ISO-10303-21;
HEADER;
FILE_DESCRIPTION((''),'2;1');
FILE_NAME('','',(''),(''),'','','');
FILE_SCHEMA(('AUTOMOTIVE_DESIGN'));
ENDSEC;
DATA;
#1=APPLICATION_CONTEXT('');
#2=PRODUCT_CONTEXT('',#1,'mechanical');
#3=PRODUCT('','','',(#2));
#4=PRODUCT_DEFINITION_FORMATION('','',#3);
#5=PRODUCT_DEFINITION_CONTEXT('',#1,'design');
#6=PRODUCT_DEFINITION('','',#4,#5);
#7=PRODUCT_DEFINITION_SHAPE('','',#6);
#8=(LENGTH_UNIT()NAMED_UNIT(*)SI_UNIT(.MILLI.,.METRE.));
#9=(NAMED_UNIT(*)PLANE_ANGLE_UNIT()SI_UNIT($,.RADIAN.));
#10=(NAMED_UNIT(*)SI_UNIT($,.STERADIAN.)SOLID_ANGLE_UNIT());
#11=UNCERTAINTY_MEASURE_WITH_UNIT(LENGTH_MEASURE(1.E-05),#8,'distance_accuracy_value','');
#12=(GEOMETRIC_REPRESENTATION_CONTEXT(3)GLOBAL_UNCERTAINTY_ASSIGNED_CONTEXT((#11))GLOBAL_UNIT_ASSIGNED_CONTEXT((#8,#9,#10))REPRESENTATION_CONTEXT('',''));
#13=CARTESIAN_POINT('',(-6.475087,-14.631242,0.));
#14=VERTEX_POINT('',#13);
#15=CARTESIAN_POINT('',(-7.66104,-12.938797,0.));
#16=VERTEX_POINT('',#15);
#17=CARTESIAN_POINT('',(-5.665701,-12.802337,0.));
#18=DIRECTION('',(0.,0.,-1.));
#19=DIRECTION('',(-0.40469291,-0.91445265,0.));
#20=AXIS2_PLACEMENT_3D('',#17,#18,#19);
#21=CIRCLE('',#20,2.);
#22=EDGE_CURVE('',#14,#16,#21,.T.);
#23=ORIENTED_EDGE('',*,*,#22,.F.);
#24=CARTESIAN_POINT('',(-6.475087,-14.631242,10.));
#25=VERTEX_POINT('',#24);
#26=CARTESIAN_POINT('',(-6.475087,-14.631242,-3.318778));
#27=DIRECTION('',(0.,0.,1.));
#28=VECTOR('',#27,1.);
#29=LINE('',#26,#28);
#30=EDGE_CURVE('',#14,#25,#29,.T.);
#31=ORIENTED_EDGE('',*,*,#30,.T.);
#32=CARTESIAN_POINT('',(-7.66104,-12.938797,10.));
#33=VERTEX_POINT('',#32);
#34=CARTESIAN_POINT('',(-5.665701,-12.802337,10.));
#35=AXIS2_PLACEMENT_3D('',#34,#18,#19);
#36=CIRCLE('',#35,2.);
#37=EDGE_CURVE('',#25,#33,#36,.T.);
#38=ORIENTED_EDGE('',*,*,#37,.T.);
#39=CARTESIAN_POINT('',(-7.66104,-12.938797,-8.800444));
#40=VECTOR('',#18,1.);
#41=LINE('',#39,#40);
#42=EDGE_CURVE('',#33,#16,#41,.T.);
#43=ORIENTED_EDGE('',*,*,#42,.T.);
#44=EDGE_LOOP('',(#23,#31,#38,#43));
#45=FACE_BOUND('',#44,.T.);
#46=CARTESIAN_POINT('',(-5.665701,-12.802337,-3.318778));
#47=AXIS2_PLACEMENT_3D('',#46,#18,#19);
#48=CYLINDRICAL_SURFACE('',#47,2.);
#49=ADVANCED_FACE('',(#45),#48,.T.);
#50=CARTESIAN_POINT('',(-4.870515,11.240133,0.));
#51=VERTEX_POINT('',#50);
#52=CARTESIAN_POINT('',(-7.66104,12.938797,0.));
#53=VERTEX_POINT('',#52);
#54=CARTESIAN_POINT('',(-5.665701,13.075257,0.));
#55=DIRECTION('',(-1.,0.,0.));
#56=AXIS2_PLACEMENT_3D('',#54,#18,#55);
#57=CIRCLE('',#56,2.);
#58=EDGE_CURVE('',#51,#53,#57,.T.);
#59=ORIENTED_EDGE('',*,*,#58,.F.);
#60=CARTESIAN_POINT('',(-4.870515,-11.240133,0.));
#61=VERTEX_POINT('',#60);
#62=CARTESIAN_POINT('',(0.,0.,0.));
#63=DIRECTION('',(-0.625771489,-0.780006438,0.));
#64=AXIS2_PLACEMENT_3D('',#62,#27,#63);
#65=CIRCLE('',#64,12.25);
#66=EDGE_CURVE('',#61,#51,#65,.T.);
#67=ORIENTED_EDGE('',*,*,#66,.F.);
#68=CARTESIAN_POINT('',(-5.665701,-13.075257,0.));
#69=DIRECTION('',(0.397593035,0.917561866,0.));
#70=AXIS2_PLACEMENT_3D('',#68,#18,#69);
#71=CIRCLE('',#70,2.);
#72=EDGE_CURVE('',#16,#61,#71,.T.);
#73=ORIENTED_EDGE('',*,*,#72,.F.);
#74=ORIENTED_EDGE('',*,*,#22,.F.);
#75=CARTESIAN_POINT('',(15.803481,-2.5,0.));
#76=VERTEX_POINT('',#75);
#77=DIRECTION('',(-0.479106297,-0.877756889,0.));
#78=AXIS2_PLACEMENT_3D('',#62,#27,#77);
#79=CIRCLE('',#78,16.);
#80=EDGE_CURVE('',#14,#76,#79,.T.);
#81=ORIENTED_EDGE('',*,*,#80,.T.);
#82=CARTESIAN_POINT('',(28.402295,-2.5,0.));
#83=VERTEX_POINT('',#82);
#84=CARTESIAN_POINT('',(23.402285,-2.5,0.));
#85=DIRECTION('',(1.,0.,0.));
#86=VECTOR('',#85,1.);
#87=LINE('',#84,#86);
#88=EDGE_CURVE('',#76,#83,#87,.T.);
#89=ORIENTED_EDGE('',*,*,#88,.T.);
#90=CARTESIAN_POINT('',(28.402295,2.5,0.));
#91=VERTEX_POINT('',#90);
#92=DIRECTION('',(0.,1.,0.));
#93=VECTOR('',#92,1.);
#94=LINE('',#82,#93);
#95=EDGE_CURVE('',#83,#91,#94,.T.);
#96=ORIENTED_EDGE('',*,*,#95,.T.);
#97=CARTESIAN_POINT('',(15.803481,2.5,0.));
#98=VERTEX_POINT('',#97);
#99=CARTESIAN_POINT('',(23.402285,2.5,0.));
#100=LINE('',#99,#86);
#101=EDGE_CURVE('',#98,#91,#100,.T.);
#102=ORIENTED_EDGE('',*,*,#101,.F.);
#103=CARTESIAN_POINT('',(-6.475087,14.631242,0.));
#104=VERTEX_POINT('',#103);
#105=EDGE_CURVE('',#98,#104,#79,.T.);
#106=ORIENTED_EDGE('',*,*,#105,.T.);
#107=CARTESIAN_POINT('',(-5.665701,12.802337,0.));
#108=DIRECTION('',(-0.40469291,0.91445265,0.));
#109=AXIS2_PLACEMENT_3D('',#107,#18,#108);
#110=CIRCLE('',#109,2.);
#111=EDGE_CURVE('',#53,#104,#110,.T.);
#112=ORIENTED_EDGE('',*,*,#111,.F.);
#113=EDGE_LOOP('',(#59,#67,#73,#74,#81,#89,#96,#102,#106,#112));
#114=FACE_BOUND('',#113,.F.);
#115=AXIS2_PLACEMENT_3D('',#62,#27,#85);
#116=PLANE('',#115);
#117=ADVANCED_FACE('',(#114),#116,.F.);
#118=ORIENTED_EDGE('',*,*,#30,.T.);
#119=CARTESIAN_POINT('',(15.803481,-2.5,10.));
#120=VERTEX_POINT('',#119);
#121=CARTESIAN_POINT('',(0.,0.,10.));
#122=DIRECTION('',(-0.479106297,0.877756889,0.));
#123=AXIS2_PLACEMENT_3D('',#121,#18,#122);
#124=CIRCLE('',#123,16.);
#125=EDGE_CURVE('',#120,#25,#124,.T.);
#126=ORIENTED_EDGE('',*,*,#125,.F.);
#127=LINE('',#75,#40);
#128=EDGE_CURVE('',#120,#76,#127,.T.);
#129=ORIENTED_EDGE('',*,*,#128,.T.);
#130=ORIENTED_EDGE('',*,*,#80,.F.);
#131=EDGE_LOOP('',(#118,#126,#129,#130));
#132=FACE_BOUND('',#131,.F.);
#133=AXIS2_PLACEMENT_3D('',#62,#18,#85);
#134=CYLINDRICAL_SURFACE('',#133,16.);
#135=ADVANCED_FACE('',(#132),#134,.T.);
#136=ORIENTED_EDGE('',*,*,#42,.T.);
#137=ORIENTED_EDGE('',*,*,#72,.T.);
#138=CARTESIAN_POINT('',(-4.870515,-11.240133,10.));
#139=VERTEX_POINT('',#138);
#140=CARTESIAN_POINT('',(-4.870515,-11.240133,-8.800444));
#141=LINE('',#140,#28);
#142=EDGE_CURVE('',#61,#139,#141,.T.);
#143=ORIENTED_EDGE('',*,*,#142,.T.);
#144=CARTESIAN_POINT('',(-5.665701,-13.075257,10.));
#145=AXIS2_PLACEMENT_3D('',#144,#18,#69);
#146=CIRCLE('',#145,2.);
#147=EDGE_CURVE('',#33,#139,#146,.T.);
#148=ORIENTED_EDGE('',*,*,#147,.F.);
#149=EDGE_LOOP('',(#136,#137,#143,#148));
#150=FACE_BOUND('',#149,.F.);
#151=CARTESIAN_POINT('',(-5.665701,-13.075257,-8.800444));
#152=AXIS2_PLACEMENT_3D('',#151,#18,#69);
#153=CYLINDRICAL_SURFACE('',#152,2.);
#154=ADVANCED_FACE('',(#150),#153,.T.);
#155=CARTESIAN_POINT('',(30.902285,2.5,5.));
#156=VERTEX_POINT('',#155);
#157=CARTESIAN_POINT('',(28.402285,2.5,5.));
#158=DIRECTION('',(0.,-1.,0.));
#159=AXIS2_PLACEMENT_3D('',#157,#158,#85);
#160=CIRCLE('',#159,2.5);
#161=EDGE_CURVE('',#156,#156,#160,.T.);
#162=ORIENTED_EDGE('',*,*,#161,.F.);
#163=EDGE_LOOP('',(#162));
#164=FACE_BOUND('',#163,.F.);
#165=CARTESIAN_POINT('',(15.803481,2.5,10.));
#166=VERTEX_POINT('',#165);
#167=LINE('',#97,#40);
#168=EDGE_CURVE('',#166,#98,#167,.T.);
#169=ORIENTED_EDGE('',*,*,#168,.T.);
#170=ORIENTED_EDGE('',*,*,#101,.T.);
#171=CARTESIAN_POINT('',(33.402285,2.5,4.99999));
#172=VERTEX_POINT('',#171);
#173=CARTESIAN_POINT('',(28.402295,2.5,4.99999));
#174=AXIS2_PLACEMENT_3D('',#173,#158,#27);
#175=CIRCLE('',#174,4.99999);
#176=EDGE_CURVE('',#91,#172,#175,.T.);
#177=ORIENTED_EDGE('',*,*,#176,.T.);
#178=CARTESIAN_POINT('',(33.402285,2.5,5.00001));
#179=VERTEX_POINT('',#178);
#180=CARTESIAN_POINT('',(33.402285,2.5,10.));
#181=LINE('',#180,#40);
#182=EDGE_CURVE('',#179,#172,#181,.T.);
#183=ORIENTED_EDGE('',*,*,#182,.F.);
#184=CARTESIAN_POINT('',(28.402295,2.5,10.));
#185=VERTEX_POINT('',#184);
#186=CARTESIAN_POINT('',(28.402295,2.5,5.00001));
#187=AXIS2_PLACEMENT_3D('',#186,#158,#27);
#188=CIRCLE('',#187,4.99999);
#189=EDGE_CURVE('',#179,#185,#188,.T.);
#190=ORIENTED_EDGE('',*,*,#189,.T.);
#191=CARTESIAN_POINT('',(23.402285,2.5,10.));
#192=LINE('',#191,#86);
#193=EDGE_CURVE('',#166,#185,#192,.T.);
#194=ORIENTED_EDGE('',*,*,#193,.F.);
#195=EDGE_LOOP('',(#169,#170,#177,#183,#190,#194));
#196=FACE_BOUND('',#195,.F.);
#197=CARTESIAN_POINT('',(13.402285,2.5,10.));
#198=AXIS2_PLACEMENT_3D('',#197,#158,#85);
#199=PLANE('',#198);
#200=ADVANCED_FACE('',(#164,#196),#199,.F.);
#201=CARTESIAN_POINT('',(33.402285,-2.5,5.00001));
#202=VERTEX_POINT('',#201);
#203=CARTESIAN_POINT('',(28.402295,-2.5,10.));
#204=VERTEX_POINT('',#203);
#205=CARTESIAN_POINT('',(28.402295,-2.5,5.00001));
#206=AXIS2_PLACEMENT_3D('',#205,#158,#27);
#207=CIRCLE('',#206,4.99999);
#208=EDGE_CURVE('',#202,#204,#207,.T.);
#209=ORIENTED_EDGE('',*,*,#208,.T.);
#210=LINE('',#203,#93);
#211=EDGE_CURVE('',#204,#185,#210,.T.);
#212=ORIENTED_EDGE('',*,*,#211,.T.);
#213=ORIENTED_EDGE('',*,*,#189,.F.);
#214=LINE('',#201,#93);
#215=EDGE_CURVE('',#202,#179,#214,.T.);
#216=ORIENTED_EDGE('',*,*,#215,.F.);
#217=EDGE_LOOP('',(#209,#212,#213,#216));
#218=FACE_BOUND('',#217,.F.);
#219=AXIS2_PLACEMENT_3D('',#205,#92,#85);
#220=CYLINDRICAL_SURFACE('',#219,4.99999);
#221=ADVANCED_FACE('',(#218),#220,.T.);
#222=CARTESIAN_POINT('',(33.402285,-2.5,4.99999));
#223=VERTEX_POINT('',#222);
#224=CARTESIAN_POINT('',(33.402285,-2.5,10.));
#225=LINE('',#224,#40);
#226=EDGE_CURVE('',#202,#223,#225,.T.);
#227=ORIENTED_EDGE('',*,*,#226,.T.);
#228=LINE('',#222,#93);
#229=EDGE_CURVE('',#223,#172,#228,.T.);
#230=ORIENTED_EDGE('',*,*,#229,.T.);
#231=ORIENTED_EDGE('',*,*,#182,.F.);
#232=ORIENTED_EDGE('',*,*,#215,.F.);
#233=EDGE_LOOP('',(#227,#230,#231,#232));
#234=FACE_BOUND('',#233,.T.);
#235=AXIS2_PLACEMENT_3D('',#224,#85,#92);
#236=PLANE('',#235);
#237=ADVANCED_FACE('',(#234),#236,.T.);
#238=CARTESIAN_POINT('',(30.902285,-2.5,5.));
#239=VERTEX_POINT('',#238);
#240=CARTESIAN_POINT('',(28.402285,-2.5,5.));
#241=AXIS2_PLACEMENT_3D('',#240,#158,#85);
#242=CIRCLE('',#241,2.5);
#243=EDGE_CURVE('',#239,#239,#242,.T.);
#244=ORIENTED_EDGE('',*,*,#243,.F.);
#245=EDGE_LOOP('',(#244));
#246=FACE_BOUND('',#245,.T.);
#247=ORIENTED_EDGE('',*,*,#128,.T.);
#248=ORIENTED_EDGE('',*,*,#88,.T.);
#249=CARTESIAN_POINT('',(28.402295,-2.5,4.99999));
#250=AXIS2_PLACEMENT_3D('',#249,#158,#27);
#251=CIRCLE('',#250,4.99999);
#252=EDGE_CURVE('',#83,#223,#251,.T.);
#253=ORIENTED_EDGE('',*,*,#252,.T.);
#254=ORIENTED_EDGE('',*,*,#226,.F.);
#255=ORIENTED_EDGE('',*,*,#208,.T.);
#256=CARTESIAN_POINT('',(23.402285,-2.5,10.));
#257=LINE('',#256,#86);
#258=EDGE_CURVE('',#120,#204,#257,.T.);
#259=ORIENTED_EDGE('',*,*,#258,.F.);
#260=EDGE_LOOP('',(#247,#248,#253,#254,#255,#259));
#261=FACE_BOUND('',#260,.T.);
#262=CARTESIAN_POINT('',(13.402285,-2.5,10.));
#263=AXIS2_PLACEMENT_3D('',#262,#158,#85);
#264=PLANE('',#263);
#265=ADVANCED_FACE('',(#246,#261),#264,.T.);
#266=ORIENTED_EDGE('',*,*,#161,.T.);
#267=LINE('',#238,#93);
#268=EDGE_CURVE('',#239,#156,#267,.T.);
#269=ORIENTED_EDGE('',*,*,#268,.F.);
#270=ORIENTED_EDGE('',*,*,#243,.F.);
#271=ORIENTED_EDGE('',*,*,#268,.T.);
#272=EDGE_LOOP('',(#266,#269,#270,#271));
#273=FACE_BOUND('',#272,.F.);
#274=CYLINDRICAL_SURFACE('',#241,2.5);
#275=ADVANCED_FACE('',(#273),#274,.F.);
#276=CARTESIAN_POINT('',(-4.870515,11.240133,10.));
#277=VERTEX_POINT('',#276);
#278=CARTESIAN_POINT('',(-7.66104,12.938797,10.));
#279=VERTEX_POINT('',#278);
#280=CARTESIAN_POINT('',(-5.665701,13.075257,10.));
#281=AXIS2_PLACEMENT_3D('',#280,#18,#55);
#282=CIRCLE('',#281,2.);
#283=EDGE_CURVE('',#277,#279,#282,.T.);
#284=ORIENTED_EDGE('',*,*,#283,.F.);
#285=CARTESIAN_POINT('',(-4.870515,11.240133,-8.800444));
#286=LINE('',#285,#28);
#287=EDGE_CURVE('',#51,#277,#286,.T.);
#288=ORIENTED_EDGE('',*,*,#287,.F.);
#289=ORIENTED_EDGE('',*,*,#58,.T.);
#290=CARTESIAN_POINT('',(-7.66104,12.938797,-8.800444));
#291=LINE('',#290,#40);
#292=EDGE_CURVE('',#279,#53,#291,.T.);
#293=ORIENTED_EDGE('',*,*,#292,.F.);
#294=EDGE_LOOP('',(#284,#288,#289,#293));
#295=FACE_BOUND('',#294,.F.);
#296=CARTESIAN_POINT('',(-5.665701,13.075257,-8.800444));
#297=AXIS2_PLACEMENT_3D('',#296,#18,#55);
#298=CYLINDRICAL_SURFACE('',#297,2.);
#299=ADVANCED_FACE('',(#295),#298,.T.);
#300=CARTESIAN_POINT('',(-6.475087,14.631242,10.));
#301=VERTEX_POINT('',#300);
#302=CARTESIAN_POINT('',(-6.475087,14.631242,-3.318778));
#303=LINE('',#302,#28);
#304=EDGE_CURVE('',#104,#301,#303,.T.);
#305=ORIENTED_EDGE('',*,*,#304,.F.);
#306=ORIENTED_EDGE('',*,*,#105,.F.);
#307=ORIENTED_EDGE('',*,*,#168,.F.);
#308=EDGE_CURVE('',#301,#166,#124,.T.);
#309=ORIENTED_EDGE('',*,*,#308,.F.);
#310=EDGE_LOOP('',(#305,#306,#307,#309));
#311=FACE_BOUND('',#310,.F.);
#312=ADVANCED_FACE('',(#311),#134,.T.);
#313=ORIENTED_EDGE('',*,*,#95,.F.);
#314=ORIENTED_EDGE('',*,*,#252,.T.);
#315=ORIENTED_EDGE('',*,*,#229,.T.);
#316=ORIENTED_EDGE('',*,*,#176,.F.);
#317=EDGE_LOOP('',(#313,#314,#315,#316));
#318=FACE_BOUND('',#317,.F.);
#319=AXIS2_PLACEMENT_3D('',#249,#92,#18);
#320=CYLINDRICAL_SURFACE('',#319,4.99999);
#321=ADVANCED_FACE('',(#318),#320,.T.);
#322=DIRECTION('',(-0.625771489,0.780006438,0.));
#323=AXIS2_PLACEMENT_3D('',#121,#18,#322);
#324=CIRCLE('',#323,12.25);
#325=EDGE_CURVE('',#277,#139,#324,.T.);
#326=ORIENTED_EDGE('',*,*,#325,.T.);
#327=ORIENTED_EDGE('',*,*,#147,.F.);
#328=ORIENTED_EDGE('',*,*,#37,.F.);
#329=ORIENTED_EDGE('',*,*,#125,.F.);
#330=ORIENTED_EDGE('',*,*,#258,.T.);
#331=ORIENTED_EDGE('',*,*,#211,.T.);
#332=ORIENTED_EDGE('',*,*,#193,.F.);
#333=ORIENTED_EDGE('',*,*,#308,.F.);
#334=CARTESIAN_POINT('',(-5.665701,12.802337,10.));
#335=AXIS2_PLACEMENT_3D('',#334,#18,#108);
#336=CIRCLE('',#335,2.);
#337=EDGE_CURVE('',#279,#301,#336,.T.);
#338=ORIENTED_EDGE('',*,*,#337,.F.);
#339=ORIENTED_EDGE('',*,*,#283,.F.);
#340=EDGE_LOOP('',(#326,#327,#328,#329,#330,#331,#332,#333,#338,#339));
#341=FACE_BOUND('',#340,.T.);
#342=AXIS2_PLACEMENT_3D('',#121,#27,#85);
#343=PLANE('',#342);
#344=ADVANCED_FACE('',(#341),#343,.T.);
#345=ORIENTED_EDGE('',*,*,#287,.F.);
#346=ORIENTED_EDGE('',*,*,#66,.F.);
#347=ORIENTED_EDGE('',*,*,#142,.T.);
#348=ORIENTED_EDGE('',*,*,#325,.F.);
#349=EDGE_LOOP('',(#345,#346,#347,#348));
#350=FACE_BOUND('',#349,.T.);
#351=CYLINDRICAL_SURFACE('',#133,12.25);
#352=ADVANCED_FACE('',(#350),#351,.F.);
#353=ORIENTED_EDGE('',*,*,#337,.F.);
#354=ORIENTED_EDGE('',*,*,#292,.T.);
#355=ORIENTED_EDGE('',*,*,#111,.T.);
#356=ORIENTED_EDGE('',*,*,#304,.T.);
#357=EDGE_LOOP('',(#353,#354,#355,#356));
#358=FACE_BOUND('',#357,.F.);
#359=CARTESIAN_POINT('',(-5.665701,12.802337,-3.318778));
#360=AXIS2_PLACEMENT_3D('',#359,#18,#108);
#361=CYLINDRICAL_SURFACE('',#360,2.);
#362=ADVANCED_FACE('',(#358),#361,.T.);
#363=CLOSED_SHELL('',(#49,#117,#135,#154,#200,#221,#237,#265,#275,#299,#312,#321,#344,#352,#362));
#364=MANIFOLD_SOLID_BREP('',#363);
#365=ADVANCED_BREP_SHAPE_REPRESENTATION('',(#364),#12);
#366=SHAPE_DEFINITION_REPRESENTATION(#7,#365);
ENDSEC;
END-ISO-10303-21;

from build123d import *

# Parameters (mm, degrees)
F0_R        = 16
F0_R_2      = 12.25
F1_DEPTH    = 10
F2_W        = 11.453170795
F2_H        = 32.4866687879
F3_DEPTH    = 10.001
F4_T1_DEPTH = 27.6008886653
F4_T3_DEPTH = 16.6375565979
F5_W        = 20
F5_H        = 5
F6_DEPTH    = 10
F7_R        = 2.5
F8_DEPTH    = 18.501
F9_R        = 4.99999


# Not quite as in the source:
# - a fillet or chamfer that OpenCascade refuses, or shapes differently, is made with other operations: its cross-section is extruded or revolved along the edge and cut away or added
# - a fillet or chamfer is up to 0.001 mm smaller than in the source, because OpenCascade refuses the exact size


with BuildPart() as f1:
    # F0 (on Top) → F1 (new body)
    with BuildSketch(Plane.XY):
        Circle(F0_R)
        Circle(F0_R_2, mode=Mode.SUBTRACT)
    extrude(amount=F1_DEPTH)

    # F2 (on face) → F3 (cut, through all)
    with BuildSketch(Plane.XY.offset(10)):
        with Locations((-13.3922861423, 0.2399678342)):
            Rectangle(F2_W, F2_H)
    extrude(amount=-F3_DEPTH, mode=Mode.SUBTRACT)

    # F4: fillet of radius 2 on 4 edges, made by hand

    # F4_s2 → F4_t1 (cut)
    with BuildSketch(Plane.XY.offset(-8.8004443327)):
        with BuildLine():
            ThreePointArc((-7.6657007448, 13.0752565967), (-6.7633409093, 11.4033755993), (-4.8705146754, 11.2401328638))
            ThreePointArc((-4.8705146754, 11.2401328638), (-6.3244783193, 10.491114049), (-7.6657007448, 9.5550788637))
            Line((-7.6657007448, 9.5550788637), (-7.6657007448, 13.0752565967))
        make_face()
        with BuildLine():
            ThreePointArc((-4.8705146754, -11.2401328638), (-6.7633409093, -11.4033755993), (-7.6657007448, -13.0752565967))
            Line((-7.6657007448, -13.0752565967), (-7.6657007448, -9.5550788637))
            ThreePointArc((-7.6657007448, -9.5550788637), (-6.3244783193, -10.491114049), (-4.8705146754, -11.2401328638))
        make_face()
    extrude(amount=F4_T1_DEPTH, mode=Mode.SUBTRACT)

    # F4_s4 → F4_t3 (cut)
    with BuildSketch(Plane.XY.offset(-3.318778299)):
        with BuildLine():
            ThreePointArc((-6.4750865655, -14.6312423932), (-7.3418230019, -13.8934897778), (-7.6657007448, -12.8023370941))
            Line((-7.6657007448, -12.8023370941), (-7.6657007448, -14.0441102278))
            ThreePointArc((-7.6657007448, -14.0441102278), (-7.076485532, -14.3500297044), (-6.4750865655, -14.6312423932))
        make_face()
        with BuildLine():
            ThreePointArc((-6.4750865655, 14.6312423932), (-7.3418230019, 13.8934897778), (-7.6657007448, 12.8023370941))
            Line((-7.6657007448, 12.8023370941), (-7.6657007448, 14.0441102278))
            ThreePointArc((-7.6657007448, 14.0441102278), (-7.076485532, 14.3500297044), (-6.4750865655, 14.6312423932))
        make_face()
    extrude(amount=F4_T3_DEPTH, mode=Mode.SUBTRACT)

    # F5 (on face) → F6 (join)
    with BuildSketch(Plane.XY.offset(10)):
        with Locations((23.4022848308, 0)):
            Rectangle(F5_W, F5_H)
    extrude(amount=-F6_DEPTH)

    # F7 (on face) → F8 (cut, through all)
    with BuildSketch(Plane.XZ.offset(2.5)):
        with Locations((28.4022848308, 5)):
            Circle(F7_R)
    extrude(amount=-F8_DEPTH, mode=Mode.SUBTRACT)

    # F9 (radius 5 in the source; OpenCascade refuses exactly that, so slightly less here)
    f9_edges = [f1.edges().sort_by_distance(p)[0] for p in [
        (33.402285, 0, 10),
        (33.402285, 0, 0),
    ]]
    fillet(f9_edges, radius=F9_R)


solid = f1.part
